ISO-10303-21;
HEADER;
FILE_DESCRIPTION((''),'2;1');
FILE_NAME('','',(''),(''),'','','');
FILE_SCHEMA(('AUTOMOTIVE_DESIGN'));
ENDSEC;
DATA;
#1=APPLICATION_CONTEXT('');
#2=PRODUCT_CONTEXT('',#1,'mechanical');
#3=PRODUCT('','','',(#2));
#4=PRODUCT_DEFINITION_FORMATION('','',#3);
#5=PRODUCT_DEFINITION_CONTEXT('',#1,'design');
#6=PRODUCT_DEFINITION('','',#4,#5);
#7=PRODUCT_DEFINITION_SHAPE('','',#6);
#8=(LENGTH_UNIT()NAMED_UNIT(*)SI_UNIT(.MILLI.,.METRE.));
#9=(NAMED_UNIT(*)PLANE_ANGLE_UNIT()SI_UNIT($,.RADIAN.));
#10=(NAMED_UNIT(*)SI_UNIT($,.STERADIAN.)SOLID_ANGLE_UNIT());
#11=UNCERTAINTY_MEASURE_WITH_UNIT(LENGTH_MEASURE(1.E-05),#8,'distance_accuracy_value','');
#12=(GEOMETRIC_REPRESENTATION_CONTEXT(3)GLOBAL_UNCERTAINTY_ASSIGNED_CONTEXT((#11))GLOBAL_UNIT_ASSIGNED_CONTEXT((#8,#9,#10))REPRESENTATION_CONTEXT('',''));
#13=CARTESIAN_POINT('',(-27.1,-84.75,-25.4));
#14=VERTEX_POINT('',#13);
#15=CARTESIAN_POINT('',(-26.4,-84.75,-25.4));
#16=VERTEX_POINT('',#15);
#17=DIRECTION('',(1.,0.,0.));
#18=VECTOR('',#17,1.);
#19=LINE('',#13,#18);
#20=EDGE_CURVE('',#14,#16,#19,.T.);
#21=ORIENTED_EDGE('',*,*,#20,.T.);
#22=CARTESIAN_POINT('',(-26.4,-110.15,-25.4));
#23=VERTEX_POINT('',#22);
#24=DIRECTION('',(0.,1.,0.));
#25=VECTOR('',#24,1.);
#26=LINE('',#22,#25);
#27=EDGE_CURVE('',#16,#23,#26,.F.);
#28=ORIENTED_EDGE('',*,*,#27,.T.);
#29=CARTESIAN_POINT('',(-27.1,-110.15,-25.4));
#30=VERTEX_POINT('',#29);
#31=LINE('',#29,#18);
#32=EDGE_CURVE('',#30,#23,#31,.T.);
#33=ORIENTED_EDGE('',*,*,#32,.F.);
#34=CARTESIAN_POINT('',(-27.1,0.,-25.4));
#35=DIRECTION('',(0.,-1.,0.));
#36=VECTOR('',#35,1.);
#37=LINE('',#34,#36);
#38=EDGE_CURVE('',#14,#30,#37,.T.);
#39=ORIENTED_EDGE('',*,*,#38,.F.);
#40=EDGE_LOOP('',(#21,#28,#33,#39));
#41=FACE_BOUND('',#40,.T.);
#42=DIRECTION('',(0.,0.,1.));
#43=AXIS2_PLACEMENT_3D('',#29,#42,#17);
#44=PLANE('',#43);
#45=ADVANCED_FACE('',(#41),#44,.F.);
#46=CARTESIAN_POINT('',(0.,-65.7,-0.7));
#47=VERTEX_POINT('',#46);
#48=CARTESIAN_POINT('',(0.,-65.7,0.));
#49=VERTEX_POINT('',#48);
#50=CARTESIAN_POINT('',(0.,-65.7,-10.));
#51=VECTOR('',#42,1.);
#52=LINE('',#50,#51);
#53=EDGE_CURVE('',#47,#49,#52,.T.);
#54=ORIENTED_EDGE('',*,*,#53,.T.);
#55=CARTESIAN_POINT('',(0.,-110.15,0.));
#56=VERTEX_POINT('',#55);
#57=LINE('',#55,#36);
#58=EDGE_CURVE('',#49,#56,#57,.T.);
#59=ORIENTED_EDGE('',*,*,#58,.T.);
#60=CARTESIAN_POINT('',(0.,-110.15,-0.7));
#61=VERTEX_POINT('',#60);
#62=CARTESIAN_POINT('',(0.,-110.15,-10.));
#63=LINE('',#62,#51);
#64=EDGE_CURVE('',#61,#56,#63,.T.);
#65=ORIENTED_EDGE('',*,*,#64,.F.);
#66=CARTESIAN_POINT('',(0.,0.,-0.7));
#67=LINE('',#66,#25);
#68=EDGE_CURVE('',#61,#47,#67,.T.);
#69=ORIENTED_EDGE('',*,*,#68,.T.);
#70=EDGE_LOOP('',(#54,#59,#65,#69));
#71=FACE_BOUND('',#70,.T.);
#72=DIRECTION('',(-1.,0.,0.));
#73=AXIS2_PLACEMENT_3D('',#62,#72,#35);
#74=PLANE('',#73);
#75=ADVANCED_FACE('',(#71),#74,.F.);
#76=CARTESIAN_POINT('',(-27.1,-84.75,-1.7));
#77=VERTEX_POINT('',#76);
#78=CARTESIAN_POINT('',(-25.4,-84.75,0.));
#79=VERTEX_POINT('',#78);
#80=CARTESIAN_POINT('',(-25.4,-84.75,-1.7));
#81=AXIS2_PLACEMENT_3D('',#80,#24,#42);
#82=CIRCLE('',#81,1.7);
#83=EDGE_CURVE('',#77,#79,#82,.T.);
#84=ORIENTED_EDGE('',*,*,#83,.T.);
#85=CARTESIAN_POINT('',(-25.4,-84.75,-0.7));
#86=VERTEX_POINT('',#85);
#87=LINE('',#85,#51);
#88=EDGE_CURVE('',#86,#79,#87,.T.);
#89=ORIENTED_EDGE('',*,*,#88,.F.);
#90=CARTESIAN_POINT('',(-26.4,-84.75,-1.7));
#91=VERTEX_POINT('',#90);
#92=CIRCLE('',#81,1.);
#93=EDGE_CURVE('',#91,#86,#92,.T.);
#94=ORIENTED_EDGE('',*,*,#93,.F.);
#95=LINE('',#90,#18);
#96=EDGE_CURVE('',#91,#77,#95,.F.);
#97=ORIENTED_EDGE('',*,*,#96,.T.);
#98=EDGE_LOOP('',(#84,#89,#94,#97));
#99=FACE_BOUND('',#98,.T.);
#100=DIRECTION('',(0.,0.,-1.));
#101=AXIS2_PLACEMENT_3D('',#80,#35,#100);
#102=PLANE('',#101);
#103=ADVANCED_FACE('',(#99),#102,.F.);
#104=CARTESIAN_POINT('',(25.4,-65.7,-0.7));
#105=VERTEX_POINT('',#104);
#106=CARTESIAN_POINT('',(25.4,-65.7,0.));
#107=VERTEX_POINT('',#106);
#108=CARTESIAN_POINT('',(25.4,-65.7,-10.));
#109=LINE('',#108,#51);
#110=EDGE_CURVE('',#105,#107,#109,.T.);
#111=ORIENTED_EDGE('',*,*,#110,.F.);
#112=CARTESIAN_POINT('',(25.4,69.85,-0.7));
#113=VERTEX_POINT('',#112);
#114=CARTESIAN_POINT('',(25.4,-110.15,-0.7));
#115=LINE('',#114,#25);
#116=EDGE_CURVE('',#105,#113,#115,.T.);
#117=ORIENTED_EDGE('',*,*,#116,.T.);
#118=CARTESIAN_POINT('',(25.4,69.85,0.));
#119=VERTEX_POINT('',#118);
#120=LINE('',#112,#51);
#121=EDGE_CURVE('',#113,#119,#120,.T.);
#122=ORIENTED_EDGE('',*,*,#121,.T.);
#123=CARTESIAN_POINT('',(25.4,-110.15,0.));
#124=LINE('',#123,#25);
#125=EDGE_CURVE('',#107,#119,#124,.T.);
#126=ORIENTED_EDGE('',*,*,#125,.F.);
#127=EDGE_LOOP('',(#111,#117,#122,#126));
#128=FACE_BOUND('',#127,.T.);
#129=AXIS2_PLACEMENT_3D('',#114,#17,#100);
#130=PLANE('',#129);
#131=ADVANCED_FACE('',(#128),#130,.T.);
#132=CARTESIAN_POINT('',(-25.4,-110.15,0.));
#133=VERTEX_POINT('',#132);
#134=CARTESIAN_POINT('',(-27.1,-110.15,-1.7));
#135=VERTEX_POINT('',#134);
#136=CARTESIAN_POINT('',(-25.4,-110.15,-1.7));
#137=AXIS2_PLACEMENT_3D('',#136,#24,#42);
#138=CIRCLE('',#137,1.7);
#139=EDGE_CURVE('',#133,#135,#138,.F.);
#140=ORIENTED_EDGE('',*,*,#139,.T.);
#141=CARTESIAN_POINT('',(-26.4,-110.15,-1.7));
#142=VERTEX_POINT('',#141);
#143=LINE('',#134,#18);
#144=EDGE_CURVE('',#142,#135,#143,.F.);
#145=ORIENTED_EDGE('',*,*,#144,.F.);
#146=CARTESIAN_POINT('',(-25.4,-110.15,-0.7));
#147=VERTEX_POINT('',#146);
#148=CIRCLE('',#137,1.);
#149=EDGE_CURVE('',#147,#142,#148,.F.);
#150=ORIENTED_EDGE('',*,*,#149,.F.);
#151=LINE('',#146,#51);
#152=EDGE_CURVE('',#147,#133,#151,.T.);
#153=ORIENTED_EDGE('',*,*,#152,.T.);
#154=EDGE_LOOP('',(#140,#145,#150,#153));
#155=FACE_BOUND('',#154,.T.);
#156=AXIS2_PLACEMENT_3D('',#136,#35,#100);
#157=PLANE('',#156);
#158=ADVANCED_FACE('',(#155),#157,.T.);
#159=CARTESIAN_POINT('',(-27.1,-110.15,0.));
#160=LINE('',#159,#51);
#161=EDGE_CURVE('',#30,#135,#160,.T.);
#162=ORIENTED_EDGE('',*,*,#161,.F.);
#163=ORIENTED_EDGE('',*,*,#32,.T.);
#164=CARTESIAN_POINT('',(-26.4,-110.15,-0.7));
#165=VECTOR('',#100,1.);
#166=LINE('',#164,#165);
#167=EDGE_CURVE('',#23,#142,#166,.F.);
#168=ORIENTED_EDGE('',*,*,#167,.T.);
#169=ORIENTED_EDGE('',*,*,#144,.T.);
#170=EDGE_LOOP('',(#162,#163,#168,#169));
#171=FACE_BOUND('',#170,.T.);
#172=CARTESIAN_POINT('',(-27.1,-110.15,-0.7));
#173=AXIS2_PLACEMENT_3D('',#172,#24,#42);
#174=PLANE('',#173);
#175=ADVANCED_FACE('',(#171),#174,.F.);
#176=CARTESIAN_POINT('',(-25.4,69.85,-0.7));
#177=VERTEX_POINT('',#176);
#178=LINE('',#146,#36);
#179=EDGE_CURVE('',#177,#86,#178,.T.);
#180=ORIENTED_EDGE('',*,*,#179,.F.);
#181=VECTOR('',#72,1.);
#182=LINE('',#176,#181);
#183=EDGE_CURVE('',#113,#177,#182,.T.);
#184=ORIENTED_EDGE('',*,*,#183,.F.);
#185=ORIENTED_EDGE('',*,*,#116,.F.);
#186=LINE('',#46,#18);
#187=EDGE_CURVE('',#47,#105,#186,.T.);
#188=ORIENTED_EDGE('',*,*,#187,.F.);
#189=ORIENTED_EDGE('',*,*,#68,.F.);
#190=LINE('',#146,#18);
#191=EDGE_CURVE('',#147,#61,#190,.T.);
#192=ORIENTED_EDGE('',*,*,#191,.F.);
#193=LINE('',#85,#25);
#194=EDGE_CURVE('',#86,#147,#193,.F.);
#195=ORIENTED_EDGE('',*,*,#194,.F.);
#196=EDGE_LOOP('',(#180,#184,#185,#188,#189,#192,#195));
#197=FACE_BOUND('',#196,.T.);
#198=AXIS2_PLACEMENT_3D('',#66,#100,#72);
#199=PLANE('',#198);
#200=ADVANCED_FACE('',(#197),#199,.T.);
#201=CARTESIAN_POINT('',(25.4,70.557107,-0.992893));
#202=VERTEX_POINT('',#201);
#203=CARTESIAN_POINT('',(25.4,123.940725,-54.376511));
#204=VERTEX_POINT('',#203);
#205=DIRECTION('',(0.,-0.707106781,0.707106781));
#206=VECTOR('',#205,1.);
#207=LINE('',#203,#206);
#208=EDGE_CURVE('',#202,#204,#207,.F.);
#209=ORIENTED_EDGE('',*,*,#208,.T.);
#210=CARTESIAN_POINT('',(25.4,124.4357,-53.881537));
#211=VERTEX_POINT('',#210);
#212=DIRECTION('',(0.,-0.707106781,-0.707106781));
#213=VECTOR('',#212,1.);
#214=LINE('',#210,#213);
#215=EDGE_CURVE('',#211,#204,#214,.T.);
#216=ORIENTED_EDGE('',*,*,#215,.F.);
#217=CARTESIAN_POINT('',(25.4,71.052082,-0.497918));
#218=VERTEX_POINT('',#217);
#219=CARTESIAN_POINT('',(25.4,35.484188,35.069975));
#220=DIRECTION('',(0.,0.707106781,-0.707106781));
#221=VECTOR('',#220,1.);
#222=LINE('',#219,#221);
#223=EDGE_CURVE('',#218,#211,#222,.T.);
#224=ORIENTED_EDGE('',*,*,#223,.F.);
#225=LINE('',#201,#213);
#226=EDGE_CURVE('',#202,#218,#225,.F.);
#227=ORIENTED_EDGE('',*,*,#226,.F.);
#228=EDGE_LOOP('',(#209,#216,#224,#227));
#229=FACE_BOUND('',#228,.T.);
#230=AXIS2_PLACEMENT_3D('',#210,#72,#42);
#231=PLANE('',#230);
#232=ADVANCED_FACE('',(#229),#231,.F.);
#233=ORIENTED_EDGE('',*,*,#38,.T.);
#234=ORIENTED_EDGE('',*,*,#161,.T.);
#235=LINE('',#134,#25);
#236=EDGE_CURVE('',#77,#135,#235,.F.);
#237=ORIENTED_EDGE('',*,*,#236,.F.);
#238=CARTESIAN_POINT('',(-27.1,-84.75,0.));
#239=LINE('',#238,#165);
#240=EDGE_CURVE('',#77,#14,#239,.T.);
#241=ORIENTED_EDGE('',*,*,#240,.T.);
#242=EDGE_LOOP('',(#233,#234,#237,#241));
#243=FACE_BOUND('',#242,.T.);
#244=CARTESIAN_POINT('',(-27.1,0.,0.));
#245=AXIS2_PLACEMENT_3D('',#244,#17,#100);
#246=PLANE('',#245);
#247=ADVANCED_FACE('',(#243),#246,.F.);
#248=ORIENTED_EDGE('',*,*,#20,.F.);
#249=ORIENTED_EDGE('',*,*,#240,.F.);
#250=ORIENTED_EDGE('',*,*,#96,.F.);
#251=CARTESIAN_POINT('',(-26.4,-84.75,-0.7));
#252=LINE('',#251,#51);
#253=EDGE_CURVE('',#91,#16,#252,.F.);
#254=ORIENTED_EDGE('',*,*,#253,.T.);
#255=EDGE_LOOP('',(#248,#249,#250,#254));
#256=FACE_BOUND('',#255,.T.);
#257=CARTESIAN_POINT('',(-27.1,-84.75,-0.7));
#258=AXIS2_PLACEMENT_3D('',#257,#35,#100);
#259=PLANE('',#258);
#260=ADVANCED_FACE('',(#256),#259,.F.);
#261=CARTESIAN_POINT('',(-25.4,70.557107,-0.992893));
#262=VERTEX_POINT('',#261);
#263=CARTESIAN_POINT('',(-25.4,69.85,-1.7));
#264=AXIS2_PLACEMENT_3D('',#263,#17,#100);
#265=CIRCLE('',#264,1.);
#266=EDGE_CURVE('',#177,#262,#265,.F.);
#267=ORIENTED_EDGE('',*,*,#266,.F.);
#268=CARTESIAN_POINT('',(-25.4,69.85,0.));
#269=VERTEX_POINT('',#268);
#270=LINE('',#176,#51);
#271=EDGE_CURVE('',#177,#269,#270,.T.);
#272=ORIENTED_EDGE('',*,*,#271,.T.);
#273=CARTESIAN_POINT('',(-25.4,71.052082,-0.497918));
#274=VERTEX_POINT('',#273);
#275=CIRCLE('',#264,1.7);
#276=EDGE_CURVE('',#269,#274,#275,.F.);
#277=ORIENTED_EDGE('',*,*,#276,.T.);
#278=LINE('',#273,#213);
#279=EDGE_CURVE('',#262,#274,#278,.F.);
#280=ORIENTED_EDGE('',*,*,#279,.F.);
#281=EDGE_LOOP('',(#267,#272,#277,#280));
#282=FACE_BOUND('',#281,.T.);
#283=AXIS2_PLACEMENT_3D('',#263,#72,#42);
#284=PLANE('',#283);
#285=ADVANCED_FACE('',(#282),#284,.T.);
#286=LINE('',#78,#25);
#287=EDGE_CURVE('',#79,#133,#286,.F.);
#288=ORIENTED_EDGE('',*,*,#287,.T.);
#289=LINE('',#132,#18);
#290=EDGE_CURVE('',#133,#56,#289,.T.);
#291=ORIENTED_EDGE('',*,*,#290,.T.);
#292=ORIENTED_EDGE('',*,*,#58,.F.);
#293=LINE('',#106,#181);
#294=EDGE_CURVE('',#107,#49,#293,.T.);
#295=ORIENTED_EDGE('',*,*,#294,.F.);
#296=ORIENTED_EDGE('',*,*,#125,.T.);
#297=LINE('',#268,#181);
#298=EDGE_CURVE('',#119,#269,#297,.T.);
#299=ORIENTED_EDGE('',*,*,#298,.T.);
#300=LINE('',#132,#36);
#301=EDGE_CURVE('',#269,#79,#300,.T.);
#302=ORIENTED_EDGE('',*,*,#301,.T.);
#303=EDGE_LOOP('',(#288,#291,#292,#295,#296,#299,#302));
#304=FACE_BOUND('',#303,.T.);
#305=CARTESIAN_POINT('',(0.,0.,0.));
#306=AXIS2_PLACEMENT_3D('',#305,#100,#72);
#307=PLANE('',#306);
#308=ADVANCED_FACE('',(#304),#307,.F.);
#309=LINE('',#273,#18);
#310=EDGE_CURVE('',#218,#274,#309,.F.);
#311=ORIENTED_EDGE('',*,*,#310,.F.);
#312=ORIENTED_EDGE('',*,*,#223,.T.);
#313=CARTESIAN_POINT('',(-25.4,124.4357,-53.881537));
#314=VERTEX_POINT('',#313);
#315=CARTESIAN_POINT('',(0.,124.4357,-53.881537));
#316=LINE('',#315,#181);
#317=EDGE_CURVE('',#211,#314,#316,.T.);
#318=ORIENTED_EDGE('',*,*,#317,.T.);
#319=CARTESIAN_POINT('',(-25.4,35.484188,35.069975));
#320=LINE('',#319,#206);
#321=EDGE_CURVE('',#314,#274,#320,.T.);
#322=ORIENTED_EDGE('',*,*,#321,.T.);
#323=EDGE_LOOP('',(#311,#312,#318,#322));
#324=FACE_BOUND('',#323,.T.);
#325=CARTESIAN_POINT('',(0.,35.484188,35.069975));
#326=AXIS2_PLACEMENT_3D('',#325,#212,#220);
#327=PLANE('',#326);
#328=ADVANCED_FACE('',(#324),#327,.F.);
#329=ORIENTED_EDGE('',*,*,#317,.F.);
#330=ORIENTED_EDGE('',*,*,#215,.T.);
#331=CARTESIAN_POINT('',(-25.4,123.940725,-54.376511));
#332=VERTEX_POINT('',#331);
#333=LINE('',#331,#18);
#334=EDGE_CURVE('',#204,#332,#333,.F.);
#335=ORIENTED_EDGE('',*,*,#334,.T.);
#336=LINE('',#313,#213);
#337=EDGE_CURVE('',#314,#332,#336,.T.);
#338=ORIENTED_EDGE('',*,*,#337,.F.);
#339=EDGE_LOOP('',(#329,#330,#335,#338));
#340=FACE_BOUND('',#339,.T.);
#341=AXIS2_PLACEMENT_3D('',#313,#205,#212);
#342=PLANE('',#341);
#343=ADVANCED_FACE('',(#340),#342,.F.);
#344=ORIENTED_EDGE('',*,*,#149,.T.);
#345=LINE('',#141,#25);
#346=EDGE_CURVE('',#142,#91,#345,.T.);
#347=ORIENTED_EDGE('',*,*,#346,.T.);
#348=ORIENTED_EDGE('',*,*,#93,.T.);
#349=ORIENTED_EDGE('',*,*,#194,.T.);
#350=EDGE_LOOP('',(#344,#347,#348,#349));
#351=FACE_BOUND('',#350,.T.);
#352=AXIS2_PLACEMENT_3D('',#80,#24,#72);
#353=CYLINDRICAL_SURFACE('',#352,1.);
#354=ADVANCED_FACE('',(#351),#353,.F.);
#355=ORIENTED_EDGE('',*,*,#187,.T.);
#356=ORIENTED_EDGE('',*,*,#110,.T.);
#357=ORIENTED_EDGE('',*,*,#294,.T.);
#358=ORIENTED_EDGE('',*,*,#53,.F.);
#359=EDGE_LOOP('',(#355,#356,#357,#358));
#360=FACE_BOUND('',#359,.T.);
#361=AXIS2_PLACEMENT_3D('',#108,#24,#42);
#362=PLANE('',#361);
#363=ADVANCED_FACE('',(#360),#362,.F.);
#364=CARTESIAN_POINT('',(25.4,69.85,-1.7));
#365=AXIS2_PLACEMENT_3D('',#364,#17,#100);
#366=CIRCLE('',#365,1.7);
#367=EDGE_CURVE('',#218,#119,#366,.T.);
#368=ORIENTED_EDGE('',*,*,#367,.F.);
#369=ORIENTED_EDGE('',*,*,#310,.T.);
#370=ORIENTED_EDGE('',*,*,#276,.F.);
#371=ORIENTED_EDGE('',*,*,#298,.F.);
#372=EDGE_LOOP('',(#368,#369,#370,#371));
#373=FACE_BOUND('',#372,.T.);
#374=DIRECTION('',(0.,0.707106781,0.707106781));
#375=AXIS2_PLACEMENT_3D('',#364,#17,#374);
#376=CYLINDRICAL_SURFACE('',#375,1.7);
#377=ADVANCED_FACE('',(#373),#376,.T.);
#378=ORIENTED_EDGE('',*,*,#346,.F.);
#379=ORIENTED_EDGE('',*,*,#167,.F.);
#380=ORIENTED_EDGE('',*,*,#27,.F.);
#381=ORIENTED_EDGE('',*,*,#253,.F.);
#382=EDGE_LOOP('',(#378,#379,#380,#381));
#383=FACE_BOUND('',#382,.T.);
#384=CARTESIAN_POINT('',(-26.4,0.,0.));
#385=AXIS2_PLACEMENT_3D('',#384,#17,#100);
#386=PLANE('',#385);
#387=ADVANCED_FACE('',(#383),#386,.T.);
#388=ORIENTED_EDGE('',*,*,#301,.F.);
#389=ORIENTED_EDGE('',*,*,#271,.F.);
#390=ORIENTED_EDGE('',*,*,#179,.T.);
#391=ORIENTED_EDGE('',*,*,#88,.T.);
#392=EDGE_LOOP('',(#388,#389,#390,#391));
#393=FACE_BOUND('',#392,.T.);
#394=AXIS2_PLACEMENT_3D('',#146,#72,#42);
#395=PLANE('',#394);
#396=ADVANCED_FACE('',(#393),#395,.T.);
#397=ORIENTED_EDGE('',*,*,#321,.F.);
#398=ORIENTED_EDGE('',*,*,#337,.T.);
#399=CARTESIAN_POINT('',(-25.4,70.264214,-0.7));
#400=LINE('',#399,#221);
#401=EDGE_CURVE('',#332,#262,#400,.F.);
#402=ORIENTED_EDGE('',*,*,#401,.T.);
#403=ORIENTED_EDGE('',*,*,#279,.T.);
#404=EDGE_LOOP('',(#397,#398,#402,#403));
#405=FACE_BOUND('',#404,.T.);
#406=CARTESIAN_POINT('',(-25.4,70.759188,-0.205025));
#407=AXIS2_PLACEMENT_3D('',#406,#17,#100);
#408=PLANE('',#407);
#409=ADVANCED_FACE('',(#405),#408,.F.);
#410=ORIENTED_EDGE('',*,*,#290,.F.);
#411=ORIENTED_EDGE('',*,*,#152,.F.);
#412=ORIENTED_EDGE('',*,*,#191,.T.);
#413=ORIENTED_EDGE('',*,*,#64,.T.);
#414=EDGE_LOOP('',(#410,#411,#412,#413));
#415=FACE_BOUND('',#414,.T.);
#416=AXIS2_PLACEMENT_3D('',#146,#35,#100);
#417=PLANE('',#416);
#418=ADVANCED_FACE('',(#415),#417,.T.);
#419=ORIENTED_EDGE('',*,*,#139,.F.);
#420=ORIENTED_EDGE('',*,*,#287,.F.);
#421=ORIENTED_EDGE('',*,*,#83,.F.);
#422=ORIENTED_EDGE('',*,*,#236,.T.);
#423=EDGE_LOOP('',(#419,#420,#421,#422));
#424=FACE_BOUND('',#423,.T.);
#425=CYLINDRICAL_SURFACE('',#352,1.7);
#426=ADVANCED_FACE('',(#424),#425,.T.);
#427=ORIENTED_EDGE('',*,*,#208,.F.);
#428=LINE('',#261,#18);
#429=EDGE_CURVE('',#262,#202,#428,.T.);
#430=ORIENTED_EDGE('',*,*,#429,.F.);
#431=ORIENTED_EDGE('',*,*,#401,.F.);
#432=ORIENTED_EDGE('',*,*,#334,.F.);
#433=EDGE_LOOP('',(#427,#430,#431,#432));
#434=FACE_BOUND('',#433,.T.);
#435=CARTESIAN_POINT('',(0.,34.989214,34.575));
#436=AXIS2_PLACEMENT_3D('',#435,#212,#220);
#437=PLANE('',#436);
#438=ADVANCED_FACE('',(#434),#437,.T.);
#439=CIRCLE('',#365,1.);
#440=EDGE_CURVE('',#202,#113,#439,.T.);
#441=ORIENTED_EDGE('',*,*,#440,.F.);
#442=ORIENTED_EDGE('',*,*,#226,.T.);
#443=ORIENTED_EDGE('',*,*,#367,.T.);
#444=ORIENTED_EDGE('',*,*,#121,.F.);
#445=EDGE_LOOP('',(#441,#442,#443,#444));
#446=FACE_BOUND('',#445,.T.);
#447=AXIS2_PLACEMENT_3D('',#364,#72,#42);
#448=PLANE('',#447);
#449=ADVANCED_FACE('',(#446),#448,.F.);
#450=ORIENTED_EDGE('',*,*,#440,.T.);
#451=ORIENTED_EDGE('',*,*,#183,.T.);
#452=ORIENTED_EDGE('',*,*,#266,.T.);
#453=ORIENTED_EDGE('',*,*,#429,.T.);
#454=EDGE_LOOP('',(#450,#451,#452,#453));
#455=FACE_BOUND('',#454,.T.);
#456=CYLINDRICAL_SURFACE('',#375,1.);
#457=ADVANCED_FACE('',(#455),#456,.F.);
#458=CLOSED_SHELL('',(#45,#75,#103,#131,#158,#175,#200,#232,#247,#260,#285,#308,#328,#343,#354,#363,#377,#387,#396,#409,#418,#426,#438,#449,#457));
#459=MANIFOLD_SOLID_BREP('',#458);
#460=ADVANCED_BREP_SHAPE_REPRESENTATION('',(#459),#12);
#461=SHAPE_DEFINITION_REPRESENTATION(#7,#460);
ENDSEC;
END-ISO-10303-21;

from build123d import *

# Parameters (mm, degrees)
SKETCH1_W          = 50.8
SKETCH1_H          = 180
BASE_FLANGE1_DEPTH = 0.7
EDGE_FLANGE1_DEPTH = 25.4
SKETCH9_W          = 25.4
SKETCH9_H          = 44.45
CUT_EXTRUDE1_DEPTH = 10
EDGE_FLANGE2_DEPTH = 50.8


# Sheet-metal steps are written as plain solids
with BuildPart() as part:
    # Sketch1 → Base-Flange1 (new body)
    with BuildSketch(Plane.XY):
        with Locations((0, -20.15)):
            Rectangle(SKETCH1_W, SKETCH1_H)
    extrude(amount=-BASE_FLANGE1_DEPTH)

    # Edge-Flange1 section (across the edge) → Edge-Flange1 (add)
    with BuildSketch(Plane(origin=(-26.4, -110.15, -0.7), x_dir=(1, 0, 0), z_dir=(0, 1, 0))):
        with BuildLine():
            Line((-0.7, 1), (-0.7, 24.7))
            Line((-0.7, 24.7), (0, 24.7))
            Line((0, 24.7), (0, 1))
            ThreePointArc((0, 1), (0.292893219, 0.292893219), (1, 0))
            Line((1, 0), (1, -0.7))
            ThreePointArc((1, -0.7), (-0.202081528, -0.202081528), (-0.7, 1))
        make_face()
    extrude(amount=EDGE_FLANGE1_DEPTH)

    # Sketch9 → Cut-Extrude1 (cut)
    with BuildSketch(Plane.XY):
        with Locations((12.7, -87.925)):
            Rectangle(SKETCH9_W, SKETCH9_H)
    extrude(amount=-CUT_EXTRUDE1_DEPTH, mode=Mode.SUBTRACT)

    # Edge-Flange2 section (across the edge) → Edge-Flange2 (add)
    with BuildSketch(Plane(origin=(-25.4, 70.264213562, -0.7), x_dir=(0, -0.7071067811865438, -0.7071067811865512), z_dir=(1, 0, 0))):
        with BuildLine():
            Line((-0.7, 0.414213562), (-0.7, 75.910050506))
            Line((-0.7, 75.910050506), (0, 75.910050506))
            Line((0, 75.910050506), (0, 0.414213562))
            ThreePointArc((0, 0.414213562), (0.076120467, 0.03153013), (0.292893219, -0.292893219))
            Line((0.292893219, -0.292893219), (-0.202081528, -0.787867966))
            ThreePointArc((-0.202081528, -0.787867966), (-0.570595205, -0.236348273), (-0.7, 0.414213562))
        make_face()
    extrude(amount=EDGE_FLANGE2_DEPTH)


solid = part.part
